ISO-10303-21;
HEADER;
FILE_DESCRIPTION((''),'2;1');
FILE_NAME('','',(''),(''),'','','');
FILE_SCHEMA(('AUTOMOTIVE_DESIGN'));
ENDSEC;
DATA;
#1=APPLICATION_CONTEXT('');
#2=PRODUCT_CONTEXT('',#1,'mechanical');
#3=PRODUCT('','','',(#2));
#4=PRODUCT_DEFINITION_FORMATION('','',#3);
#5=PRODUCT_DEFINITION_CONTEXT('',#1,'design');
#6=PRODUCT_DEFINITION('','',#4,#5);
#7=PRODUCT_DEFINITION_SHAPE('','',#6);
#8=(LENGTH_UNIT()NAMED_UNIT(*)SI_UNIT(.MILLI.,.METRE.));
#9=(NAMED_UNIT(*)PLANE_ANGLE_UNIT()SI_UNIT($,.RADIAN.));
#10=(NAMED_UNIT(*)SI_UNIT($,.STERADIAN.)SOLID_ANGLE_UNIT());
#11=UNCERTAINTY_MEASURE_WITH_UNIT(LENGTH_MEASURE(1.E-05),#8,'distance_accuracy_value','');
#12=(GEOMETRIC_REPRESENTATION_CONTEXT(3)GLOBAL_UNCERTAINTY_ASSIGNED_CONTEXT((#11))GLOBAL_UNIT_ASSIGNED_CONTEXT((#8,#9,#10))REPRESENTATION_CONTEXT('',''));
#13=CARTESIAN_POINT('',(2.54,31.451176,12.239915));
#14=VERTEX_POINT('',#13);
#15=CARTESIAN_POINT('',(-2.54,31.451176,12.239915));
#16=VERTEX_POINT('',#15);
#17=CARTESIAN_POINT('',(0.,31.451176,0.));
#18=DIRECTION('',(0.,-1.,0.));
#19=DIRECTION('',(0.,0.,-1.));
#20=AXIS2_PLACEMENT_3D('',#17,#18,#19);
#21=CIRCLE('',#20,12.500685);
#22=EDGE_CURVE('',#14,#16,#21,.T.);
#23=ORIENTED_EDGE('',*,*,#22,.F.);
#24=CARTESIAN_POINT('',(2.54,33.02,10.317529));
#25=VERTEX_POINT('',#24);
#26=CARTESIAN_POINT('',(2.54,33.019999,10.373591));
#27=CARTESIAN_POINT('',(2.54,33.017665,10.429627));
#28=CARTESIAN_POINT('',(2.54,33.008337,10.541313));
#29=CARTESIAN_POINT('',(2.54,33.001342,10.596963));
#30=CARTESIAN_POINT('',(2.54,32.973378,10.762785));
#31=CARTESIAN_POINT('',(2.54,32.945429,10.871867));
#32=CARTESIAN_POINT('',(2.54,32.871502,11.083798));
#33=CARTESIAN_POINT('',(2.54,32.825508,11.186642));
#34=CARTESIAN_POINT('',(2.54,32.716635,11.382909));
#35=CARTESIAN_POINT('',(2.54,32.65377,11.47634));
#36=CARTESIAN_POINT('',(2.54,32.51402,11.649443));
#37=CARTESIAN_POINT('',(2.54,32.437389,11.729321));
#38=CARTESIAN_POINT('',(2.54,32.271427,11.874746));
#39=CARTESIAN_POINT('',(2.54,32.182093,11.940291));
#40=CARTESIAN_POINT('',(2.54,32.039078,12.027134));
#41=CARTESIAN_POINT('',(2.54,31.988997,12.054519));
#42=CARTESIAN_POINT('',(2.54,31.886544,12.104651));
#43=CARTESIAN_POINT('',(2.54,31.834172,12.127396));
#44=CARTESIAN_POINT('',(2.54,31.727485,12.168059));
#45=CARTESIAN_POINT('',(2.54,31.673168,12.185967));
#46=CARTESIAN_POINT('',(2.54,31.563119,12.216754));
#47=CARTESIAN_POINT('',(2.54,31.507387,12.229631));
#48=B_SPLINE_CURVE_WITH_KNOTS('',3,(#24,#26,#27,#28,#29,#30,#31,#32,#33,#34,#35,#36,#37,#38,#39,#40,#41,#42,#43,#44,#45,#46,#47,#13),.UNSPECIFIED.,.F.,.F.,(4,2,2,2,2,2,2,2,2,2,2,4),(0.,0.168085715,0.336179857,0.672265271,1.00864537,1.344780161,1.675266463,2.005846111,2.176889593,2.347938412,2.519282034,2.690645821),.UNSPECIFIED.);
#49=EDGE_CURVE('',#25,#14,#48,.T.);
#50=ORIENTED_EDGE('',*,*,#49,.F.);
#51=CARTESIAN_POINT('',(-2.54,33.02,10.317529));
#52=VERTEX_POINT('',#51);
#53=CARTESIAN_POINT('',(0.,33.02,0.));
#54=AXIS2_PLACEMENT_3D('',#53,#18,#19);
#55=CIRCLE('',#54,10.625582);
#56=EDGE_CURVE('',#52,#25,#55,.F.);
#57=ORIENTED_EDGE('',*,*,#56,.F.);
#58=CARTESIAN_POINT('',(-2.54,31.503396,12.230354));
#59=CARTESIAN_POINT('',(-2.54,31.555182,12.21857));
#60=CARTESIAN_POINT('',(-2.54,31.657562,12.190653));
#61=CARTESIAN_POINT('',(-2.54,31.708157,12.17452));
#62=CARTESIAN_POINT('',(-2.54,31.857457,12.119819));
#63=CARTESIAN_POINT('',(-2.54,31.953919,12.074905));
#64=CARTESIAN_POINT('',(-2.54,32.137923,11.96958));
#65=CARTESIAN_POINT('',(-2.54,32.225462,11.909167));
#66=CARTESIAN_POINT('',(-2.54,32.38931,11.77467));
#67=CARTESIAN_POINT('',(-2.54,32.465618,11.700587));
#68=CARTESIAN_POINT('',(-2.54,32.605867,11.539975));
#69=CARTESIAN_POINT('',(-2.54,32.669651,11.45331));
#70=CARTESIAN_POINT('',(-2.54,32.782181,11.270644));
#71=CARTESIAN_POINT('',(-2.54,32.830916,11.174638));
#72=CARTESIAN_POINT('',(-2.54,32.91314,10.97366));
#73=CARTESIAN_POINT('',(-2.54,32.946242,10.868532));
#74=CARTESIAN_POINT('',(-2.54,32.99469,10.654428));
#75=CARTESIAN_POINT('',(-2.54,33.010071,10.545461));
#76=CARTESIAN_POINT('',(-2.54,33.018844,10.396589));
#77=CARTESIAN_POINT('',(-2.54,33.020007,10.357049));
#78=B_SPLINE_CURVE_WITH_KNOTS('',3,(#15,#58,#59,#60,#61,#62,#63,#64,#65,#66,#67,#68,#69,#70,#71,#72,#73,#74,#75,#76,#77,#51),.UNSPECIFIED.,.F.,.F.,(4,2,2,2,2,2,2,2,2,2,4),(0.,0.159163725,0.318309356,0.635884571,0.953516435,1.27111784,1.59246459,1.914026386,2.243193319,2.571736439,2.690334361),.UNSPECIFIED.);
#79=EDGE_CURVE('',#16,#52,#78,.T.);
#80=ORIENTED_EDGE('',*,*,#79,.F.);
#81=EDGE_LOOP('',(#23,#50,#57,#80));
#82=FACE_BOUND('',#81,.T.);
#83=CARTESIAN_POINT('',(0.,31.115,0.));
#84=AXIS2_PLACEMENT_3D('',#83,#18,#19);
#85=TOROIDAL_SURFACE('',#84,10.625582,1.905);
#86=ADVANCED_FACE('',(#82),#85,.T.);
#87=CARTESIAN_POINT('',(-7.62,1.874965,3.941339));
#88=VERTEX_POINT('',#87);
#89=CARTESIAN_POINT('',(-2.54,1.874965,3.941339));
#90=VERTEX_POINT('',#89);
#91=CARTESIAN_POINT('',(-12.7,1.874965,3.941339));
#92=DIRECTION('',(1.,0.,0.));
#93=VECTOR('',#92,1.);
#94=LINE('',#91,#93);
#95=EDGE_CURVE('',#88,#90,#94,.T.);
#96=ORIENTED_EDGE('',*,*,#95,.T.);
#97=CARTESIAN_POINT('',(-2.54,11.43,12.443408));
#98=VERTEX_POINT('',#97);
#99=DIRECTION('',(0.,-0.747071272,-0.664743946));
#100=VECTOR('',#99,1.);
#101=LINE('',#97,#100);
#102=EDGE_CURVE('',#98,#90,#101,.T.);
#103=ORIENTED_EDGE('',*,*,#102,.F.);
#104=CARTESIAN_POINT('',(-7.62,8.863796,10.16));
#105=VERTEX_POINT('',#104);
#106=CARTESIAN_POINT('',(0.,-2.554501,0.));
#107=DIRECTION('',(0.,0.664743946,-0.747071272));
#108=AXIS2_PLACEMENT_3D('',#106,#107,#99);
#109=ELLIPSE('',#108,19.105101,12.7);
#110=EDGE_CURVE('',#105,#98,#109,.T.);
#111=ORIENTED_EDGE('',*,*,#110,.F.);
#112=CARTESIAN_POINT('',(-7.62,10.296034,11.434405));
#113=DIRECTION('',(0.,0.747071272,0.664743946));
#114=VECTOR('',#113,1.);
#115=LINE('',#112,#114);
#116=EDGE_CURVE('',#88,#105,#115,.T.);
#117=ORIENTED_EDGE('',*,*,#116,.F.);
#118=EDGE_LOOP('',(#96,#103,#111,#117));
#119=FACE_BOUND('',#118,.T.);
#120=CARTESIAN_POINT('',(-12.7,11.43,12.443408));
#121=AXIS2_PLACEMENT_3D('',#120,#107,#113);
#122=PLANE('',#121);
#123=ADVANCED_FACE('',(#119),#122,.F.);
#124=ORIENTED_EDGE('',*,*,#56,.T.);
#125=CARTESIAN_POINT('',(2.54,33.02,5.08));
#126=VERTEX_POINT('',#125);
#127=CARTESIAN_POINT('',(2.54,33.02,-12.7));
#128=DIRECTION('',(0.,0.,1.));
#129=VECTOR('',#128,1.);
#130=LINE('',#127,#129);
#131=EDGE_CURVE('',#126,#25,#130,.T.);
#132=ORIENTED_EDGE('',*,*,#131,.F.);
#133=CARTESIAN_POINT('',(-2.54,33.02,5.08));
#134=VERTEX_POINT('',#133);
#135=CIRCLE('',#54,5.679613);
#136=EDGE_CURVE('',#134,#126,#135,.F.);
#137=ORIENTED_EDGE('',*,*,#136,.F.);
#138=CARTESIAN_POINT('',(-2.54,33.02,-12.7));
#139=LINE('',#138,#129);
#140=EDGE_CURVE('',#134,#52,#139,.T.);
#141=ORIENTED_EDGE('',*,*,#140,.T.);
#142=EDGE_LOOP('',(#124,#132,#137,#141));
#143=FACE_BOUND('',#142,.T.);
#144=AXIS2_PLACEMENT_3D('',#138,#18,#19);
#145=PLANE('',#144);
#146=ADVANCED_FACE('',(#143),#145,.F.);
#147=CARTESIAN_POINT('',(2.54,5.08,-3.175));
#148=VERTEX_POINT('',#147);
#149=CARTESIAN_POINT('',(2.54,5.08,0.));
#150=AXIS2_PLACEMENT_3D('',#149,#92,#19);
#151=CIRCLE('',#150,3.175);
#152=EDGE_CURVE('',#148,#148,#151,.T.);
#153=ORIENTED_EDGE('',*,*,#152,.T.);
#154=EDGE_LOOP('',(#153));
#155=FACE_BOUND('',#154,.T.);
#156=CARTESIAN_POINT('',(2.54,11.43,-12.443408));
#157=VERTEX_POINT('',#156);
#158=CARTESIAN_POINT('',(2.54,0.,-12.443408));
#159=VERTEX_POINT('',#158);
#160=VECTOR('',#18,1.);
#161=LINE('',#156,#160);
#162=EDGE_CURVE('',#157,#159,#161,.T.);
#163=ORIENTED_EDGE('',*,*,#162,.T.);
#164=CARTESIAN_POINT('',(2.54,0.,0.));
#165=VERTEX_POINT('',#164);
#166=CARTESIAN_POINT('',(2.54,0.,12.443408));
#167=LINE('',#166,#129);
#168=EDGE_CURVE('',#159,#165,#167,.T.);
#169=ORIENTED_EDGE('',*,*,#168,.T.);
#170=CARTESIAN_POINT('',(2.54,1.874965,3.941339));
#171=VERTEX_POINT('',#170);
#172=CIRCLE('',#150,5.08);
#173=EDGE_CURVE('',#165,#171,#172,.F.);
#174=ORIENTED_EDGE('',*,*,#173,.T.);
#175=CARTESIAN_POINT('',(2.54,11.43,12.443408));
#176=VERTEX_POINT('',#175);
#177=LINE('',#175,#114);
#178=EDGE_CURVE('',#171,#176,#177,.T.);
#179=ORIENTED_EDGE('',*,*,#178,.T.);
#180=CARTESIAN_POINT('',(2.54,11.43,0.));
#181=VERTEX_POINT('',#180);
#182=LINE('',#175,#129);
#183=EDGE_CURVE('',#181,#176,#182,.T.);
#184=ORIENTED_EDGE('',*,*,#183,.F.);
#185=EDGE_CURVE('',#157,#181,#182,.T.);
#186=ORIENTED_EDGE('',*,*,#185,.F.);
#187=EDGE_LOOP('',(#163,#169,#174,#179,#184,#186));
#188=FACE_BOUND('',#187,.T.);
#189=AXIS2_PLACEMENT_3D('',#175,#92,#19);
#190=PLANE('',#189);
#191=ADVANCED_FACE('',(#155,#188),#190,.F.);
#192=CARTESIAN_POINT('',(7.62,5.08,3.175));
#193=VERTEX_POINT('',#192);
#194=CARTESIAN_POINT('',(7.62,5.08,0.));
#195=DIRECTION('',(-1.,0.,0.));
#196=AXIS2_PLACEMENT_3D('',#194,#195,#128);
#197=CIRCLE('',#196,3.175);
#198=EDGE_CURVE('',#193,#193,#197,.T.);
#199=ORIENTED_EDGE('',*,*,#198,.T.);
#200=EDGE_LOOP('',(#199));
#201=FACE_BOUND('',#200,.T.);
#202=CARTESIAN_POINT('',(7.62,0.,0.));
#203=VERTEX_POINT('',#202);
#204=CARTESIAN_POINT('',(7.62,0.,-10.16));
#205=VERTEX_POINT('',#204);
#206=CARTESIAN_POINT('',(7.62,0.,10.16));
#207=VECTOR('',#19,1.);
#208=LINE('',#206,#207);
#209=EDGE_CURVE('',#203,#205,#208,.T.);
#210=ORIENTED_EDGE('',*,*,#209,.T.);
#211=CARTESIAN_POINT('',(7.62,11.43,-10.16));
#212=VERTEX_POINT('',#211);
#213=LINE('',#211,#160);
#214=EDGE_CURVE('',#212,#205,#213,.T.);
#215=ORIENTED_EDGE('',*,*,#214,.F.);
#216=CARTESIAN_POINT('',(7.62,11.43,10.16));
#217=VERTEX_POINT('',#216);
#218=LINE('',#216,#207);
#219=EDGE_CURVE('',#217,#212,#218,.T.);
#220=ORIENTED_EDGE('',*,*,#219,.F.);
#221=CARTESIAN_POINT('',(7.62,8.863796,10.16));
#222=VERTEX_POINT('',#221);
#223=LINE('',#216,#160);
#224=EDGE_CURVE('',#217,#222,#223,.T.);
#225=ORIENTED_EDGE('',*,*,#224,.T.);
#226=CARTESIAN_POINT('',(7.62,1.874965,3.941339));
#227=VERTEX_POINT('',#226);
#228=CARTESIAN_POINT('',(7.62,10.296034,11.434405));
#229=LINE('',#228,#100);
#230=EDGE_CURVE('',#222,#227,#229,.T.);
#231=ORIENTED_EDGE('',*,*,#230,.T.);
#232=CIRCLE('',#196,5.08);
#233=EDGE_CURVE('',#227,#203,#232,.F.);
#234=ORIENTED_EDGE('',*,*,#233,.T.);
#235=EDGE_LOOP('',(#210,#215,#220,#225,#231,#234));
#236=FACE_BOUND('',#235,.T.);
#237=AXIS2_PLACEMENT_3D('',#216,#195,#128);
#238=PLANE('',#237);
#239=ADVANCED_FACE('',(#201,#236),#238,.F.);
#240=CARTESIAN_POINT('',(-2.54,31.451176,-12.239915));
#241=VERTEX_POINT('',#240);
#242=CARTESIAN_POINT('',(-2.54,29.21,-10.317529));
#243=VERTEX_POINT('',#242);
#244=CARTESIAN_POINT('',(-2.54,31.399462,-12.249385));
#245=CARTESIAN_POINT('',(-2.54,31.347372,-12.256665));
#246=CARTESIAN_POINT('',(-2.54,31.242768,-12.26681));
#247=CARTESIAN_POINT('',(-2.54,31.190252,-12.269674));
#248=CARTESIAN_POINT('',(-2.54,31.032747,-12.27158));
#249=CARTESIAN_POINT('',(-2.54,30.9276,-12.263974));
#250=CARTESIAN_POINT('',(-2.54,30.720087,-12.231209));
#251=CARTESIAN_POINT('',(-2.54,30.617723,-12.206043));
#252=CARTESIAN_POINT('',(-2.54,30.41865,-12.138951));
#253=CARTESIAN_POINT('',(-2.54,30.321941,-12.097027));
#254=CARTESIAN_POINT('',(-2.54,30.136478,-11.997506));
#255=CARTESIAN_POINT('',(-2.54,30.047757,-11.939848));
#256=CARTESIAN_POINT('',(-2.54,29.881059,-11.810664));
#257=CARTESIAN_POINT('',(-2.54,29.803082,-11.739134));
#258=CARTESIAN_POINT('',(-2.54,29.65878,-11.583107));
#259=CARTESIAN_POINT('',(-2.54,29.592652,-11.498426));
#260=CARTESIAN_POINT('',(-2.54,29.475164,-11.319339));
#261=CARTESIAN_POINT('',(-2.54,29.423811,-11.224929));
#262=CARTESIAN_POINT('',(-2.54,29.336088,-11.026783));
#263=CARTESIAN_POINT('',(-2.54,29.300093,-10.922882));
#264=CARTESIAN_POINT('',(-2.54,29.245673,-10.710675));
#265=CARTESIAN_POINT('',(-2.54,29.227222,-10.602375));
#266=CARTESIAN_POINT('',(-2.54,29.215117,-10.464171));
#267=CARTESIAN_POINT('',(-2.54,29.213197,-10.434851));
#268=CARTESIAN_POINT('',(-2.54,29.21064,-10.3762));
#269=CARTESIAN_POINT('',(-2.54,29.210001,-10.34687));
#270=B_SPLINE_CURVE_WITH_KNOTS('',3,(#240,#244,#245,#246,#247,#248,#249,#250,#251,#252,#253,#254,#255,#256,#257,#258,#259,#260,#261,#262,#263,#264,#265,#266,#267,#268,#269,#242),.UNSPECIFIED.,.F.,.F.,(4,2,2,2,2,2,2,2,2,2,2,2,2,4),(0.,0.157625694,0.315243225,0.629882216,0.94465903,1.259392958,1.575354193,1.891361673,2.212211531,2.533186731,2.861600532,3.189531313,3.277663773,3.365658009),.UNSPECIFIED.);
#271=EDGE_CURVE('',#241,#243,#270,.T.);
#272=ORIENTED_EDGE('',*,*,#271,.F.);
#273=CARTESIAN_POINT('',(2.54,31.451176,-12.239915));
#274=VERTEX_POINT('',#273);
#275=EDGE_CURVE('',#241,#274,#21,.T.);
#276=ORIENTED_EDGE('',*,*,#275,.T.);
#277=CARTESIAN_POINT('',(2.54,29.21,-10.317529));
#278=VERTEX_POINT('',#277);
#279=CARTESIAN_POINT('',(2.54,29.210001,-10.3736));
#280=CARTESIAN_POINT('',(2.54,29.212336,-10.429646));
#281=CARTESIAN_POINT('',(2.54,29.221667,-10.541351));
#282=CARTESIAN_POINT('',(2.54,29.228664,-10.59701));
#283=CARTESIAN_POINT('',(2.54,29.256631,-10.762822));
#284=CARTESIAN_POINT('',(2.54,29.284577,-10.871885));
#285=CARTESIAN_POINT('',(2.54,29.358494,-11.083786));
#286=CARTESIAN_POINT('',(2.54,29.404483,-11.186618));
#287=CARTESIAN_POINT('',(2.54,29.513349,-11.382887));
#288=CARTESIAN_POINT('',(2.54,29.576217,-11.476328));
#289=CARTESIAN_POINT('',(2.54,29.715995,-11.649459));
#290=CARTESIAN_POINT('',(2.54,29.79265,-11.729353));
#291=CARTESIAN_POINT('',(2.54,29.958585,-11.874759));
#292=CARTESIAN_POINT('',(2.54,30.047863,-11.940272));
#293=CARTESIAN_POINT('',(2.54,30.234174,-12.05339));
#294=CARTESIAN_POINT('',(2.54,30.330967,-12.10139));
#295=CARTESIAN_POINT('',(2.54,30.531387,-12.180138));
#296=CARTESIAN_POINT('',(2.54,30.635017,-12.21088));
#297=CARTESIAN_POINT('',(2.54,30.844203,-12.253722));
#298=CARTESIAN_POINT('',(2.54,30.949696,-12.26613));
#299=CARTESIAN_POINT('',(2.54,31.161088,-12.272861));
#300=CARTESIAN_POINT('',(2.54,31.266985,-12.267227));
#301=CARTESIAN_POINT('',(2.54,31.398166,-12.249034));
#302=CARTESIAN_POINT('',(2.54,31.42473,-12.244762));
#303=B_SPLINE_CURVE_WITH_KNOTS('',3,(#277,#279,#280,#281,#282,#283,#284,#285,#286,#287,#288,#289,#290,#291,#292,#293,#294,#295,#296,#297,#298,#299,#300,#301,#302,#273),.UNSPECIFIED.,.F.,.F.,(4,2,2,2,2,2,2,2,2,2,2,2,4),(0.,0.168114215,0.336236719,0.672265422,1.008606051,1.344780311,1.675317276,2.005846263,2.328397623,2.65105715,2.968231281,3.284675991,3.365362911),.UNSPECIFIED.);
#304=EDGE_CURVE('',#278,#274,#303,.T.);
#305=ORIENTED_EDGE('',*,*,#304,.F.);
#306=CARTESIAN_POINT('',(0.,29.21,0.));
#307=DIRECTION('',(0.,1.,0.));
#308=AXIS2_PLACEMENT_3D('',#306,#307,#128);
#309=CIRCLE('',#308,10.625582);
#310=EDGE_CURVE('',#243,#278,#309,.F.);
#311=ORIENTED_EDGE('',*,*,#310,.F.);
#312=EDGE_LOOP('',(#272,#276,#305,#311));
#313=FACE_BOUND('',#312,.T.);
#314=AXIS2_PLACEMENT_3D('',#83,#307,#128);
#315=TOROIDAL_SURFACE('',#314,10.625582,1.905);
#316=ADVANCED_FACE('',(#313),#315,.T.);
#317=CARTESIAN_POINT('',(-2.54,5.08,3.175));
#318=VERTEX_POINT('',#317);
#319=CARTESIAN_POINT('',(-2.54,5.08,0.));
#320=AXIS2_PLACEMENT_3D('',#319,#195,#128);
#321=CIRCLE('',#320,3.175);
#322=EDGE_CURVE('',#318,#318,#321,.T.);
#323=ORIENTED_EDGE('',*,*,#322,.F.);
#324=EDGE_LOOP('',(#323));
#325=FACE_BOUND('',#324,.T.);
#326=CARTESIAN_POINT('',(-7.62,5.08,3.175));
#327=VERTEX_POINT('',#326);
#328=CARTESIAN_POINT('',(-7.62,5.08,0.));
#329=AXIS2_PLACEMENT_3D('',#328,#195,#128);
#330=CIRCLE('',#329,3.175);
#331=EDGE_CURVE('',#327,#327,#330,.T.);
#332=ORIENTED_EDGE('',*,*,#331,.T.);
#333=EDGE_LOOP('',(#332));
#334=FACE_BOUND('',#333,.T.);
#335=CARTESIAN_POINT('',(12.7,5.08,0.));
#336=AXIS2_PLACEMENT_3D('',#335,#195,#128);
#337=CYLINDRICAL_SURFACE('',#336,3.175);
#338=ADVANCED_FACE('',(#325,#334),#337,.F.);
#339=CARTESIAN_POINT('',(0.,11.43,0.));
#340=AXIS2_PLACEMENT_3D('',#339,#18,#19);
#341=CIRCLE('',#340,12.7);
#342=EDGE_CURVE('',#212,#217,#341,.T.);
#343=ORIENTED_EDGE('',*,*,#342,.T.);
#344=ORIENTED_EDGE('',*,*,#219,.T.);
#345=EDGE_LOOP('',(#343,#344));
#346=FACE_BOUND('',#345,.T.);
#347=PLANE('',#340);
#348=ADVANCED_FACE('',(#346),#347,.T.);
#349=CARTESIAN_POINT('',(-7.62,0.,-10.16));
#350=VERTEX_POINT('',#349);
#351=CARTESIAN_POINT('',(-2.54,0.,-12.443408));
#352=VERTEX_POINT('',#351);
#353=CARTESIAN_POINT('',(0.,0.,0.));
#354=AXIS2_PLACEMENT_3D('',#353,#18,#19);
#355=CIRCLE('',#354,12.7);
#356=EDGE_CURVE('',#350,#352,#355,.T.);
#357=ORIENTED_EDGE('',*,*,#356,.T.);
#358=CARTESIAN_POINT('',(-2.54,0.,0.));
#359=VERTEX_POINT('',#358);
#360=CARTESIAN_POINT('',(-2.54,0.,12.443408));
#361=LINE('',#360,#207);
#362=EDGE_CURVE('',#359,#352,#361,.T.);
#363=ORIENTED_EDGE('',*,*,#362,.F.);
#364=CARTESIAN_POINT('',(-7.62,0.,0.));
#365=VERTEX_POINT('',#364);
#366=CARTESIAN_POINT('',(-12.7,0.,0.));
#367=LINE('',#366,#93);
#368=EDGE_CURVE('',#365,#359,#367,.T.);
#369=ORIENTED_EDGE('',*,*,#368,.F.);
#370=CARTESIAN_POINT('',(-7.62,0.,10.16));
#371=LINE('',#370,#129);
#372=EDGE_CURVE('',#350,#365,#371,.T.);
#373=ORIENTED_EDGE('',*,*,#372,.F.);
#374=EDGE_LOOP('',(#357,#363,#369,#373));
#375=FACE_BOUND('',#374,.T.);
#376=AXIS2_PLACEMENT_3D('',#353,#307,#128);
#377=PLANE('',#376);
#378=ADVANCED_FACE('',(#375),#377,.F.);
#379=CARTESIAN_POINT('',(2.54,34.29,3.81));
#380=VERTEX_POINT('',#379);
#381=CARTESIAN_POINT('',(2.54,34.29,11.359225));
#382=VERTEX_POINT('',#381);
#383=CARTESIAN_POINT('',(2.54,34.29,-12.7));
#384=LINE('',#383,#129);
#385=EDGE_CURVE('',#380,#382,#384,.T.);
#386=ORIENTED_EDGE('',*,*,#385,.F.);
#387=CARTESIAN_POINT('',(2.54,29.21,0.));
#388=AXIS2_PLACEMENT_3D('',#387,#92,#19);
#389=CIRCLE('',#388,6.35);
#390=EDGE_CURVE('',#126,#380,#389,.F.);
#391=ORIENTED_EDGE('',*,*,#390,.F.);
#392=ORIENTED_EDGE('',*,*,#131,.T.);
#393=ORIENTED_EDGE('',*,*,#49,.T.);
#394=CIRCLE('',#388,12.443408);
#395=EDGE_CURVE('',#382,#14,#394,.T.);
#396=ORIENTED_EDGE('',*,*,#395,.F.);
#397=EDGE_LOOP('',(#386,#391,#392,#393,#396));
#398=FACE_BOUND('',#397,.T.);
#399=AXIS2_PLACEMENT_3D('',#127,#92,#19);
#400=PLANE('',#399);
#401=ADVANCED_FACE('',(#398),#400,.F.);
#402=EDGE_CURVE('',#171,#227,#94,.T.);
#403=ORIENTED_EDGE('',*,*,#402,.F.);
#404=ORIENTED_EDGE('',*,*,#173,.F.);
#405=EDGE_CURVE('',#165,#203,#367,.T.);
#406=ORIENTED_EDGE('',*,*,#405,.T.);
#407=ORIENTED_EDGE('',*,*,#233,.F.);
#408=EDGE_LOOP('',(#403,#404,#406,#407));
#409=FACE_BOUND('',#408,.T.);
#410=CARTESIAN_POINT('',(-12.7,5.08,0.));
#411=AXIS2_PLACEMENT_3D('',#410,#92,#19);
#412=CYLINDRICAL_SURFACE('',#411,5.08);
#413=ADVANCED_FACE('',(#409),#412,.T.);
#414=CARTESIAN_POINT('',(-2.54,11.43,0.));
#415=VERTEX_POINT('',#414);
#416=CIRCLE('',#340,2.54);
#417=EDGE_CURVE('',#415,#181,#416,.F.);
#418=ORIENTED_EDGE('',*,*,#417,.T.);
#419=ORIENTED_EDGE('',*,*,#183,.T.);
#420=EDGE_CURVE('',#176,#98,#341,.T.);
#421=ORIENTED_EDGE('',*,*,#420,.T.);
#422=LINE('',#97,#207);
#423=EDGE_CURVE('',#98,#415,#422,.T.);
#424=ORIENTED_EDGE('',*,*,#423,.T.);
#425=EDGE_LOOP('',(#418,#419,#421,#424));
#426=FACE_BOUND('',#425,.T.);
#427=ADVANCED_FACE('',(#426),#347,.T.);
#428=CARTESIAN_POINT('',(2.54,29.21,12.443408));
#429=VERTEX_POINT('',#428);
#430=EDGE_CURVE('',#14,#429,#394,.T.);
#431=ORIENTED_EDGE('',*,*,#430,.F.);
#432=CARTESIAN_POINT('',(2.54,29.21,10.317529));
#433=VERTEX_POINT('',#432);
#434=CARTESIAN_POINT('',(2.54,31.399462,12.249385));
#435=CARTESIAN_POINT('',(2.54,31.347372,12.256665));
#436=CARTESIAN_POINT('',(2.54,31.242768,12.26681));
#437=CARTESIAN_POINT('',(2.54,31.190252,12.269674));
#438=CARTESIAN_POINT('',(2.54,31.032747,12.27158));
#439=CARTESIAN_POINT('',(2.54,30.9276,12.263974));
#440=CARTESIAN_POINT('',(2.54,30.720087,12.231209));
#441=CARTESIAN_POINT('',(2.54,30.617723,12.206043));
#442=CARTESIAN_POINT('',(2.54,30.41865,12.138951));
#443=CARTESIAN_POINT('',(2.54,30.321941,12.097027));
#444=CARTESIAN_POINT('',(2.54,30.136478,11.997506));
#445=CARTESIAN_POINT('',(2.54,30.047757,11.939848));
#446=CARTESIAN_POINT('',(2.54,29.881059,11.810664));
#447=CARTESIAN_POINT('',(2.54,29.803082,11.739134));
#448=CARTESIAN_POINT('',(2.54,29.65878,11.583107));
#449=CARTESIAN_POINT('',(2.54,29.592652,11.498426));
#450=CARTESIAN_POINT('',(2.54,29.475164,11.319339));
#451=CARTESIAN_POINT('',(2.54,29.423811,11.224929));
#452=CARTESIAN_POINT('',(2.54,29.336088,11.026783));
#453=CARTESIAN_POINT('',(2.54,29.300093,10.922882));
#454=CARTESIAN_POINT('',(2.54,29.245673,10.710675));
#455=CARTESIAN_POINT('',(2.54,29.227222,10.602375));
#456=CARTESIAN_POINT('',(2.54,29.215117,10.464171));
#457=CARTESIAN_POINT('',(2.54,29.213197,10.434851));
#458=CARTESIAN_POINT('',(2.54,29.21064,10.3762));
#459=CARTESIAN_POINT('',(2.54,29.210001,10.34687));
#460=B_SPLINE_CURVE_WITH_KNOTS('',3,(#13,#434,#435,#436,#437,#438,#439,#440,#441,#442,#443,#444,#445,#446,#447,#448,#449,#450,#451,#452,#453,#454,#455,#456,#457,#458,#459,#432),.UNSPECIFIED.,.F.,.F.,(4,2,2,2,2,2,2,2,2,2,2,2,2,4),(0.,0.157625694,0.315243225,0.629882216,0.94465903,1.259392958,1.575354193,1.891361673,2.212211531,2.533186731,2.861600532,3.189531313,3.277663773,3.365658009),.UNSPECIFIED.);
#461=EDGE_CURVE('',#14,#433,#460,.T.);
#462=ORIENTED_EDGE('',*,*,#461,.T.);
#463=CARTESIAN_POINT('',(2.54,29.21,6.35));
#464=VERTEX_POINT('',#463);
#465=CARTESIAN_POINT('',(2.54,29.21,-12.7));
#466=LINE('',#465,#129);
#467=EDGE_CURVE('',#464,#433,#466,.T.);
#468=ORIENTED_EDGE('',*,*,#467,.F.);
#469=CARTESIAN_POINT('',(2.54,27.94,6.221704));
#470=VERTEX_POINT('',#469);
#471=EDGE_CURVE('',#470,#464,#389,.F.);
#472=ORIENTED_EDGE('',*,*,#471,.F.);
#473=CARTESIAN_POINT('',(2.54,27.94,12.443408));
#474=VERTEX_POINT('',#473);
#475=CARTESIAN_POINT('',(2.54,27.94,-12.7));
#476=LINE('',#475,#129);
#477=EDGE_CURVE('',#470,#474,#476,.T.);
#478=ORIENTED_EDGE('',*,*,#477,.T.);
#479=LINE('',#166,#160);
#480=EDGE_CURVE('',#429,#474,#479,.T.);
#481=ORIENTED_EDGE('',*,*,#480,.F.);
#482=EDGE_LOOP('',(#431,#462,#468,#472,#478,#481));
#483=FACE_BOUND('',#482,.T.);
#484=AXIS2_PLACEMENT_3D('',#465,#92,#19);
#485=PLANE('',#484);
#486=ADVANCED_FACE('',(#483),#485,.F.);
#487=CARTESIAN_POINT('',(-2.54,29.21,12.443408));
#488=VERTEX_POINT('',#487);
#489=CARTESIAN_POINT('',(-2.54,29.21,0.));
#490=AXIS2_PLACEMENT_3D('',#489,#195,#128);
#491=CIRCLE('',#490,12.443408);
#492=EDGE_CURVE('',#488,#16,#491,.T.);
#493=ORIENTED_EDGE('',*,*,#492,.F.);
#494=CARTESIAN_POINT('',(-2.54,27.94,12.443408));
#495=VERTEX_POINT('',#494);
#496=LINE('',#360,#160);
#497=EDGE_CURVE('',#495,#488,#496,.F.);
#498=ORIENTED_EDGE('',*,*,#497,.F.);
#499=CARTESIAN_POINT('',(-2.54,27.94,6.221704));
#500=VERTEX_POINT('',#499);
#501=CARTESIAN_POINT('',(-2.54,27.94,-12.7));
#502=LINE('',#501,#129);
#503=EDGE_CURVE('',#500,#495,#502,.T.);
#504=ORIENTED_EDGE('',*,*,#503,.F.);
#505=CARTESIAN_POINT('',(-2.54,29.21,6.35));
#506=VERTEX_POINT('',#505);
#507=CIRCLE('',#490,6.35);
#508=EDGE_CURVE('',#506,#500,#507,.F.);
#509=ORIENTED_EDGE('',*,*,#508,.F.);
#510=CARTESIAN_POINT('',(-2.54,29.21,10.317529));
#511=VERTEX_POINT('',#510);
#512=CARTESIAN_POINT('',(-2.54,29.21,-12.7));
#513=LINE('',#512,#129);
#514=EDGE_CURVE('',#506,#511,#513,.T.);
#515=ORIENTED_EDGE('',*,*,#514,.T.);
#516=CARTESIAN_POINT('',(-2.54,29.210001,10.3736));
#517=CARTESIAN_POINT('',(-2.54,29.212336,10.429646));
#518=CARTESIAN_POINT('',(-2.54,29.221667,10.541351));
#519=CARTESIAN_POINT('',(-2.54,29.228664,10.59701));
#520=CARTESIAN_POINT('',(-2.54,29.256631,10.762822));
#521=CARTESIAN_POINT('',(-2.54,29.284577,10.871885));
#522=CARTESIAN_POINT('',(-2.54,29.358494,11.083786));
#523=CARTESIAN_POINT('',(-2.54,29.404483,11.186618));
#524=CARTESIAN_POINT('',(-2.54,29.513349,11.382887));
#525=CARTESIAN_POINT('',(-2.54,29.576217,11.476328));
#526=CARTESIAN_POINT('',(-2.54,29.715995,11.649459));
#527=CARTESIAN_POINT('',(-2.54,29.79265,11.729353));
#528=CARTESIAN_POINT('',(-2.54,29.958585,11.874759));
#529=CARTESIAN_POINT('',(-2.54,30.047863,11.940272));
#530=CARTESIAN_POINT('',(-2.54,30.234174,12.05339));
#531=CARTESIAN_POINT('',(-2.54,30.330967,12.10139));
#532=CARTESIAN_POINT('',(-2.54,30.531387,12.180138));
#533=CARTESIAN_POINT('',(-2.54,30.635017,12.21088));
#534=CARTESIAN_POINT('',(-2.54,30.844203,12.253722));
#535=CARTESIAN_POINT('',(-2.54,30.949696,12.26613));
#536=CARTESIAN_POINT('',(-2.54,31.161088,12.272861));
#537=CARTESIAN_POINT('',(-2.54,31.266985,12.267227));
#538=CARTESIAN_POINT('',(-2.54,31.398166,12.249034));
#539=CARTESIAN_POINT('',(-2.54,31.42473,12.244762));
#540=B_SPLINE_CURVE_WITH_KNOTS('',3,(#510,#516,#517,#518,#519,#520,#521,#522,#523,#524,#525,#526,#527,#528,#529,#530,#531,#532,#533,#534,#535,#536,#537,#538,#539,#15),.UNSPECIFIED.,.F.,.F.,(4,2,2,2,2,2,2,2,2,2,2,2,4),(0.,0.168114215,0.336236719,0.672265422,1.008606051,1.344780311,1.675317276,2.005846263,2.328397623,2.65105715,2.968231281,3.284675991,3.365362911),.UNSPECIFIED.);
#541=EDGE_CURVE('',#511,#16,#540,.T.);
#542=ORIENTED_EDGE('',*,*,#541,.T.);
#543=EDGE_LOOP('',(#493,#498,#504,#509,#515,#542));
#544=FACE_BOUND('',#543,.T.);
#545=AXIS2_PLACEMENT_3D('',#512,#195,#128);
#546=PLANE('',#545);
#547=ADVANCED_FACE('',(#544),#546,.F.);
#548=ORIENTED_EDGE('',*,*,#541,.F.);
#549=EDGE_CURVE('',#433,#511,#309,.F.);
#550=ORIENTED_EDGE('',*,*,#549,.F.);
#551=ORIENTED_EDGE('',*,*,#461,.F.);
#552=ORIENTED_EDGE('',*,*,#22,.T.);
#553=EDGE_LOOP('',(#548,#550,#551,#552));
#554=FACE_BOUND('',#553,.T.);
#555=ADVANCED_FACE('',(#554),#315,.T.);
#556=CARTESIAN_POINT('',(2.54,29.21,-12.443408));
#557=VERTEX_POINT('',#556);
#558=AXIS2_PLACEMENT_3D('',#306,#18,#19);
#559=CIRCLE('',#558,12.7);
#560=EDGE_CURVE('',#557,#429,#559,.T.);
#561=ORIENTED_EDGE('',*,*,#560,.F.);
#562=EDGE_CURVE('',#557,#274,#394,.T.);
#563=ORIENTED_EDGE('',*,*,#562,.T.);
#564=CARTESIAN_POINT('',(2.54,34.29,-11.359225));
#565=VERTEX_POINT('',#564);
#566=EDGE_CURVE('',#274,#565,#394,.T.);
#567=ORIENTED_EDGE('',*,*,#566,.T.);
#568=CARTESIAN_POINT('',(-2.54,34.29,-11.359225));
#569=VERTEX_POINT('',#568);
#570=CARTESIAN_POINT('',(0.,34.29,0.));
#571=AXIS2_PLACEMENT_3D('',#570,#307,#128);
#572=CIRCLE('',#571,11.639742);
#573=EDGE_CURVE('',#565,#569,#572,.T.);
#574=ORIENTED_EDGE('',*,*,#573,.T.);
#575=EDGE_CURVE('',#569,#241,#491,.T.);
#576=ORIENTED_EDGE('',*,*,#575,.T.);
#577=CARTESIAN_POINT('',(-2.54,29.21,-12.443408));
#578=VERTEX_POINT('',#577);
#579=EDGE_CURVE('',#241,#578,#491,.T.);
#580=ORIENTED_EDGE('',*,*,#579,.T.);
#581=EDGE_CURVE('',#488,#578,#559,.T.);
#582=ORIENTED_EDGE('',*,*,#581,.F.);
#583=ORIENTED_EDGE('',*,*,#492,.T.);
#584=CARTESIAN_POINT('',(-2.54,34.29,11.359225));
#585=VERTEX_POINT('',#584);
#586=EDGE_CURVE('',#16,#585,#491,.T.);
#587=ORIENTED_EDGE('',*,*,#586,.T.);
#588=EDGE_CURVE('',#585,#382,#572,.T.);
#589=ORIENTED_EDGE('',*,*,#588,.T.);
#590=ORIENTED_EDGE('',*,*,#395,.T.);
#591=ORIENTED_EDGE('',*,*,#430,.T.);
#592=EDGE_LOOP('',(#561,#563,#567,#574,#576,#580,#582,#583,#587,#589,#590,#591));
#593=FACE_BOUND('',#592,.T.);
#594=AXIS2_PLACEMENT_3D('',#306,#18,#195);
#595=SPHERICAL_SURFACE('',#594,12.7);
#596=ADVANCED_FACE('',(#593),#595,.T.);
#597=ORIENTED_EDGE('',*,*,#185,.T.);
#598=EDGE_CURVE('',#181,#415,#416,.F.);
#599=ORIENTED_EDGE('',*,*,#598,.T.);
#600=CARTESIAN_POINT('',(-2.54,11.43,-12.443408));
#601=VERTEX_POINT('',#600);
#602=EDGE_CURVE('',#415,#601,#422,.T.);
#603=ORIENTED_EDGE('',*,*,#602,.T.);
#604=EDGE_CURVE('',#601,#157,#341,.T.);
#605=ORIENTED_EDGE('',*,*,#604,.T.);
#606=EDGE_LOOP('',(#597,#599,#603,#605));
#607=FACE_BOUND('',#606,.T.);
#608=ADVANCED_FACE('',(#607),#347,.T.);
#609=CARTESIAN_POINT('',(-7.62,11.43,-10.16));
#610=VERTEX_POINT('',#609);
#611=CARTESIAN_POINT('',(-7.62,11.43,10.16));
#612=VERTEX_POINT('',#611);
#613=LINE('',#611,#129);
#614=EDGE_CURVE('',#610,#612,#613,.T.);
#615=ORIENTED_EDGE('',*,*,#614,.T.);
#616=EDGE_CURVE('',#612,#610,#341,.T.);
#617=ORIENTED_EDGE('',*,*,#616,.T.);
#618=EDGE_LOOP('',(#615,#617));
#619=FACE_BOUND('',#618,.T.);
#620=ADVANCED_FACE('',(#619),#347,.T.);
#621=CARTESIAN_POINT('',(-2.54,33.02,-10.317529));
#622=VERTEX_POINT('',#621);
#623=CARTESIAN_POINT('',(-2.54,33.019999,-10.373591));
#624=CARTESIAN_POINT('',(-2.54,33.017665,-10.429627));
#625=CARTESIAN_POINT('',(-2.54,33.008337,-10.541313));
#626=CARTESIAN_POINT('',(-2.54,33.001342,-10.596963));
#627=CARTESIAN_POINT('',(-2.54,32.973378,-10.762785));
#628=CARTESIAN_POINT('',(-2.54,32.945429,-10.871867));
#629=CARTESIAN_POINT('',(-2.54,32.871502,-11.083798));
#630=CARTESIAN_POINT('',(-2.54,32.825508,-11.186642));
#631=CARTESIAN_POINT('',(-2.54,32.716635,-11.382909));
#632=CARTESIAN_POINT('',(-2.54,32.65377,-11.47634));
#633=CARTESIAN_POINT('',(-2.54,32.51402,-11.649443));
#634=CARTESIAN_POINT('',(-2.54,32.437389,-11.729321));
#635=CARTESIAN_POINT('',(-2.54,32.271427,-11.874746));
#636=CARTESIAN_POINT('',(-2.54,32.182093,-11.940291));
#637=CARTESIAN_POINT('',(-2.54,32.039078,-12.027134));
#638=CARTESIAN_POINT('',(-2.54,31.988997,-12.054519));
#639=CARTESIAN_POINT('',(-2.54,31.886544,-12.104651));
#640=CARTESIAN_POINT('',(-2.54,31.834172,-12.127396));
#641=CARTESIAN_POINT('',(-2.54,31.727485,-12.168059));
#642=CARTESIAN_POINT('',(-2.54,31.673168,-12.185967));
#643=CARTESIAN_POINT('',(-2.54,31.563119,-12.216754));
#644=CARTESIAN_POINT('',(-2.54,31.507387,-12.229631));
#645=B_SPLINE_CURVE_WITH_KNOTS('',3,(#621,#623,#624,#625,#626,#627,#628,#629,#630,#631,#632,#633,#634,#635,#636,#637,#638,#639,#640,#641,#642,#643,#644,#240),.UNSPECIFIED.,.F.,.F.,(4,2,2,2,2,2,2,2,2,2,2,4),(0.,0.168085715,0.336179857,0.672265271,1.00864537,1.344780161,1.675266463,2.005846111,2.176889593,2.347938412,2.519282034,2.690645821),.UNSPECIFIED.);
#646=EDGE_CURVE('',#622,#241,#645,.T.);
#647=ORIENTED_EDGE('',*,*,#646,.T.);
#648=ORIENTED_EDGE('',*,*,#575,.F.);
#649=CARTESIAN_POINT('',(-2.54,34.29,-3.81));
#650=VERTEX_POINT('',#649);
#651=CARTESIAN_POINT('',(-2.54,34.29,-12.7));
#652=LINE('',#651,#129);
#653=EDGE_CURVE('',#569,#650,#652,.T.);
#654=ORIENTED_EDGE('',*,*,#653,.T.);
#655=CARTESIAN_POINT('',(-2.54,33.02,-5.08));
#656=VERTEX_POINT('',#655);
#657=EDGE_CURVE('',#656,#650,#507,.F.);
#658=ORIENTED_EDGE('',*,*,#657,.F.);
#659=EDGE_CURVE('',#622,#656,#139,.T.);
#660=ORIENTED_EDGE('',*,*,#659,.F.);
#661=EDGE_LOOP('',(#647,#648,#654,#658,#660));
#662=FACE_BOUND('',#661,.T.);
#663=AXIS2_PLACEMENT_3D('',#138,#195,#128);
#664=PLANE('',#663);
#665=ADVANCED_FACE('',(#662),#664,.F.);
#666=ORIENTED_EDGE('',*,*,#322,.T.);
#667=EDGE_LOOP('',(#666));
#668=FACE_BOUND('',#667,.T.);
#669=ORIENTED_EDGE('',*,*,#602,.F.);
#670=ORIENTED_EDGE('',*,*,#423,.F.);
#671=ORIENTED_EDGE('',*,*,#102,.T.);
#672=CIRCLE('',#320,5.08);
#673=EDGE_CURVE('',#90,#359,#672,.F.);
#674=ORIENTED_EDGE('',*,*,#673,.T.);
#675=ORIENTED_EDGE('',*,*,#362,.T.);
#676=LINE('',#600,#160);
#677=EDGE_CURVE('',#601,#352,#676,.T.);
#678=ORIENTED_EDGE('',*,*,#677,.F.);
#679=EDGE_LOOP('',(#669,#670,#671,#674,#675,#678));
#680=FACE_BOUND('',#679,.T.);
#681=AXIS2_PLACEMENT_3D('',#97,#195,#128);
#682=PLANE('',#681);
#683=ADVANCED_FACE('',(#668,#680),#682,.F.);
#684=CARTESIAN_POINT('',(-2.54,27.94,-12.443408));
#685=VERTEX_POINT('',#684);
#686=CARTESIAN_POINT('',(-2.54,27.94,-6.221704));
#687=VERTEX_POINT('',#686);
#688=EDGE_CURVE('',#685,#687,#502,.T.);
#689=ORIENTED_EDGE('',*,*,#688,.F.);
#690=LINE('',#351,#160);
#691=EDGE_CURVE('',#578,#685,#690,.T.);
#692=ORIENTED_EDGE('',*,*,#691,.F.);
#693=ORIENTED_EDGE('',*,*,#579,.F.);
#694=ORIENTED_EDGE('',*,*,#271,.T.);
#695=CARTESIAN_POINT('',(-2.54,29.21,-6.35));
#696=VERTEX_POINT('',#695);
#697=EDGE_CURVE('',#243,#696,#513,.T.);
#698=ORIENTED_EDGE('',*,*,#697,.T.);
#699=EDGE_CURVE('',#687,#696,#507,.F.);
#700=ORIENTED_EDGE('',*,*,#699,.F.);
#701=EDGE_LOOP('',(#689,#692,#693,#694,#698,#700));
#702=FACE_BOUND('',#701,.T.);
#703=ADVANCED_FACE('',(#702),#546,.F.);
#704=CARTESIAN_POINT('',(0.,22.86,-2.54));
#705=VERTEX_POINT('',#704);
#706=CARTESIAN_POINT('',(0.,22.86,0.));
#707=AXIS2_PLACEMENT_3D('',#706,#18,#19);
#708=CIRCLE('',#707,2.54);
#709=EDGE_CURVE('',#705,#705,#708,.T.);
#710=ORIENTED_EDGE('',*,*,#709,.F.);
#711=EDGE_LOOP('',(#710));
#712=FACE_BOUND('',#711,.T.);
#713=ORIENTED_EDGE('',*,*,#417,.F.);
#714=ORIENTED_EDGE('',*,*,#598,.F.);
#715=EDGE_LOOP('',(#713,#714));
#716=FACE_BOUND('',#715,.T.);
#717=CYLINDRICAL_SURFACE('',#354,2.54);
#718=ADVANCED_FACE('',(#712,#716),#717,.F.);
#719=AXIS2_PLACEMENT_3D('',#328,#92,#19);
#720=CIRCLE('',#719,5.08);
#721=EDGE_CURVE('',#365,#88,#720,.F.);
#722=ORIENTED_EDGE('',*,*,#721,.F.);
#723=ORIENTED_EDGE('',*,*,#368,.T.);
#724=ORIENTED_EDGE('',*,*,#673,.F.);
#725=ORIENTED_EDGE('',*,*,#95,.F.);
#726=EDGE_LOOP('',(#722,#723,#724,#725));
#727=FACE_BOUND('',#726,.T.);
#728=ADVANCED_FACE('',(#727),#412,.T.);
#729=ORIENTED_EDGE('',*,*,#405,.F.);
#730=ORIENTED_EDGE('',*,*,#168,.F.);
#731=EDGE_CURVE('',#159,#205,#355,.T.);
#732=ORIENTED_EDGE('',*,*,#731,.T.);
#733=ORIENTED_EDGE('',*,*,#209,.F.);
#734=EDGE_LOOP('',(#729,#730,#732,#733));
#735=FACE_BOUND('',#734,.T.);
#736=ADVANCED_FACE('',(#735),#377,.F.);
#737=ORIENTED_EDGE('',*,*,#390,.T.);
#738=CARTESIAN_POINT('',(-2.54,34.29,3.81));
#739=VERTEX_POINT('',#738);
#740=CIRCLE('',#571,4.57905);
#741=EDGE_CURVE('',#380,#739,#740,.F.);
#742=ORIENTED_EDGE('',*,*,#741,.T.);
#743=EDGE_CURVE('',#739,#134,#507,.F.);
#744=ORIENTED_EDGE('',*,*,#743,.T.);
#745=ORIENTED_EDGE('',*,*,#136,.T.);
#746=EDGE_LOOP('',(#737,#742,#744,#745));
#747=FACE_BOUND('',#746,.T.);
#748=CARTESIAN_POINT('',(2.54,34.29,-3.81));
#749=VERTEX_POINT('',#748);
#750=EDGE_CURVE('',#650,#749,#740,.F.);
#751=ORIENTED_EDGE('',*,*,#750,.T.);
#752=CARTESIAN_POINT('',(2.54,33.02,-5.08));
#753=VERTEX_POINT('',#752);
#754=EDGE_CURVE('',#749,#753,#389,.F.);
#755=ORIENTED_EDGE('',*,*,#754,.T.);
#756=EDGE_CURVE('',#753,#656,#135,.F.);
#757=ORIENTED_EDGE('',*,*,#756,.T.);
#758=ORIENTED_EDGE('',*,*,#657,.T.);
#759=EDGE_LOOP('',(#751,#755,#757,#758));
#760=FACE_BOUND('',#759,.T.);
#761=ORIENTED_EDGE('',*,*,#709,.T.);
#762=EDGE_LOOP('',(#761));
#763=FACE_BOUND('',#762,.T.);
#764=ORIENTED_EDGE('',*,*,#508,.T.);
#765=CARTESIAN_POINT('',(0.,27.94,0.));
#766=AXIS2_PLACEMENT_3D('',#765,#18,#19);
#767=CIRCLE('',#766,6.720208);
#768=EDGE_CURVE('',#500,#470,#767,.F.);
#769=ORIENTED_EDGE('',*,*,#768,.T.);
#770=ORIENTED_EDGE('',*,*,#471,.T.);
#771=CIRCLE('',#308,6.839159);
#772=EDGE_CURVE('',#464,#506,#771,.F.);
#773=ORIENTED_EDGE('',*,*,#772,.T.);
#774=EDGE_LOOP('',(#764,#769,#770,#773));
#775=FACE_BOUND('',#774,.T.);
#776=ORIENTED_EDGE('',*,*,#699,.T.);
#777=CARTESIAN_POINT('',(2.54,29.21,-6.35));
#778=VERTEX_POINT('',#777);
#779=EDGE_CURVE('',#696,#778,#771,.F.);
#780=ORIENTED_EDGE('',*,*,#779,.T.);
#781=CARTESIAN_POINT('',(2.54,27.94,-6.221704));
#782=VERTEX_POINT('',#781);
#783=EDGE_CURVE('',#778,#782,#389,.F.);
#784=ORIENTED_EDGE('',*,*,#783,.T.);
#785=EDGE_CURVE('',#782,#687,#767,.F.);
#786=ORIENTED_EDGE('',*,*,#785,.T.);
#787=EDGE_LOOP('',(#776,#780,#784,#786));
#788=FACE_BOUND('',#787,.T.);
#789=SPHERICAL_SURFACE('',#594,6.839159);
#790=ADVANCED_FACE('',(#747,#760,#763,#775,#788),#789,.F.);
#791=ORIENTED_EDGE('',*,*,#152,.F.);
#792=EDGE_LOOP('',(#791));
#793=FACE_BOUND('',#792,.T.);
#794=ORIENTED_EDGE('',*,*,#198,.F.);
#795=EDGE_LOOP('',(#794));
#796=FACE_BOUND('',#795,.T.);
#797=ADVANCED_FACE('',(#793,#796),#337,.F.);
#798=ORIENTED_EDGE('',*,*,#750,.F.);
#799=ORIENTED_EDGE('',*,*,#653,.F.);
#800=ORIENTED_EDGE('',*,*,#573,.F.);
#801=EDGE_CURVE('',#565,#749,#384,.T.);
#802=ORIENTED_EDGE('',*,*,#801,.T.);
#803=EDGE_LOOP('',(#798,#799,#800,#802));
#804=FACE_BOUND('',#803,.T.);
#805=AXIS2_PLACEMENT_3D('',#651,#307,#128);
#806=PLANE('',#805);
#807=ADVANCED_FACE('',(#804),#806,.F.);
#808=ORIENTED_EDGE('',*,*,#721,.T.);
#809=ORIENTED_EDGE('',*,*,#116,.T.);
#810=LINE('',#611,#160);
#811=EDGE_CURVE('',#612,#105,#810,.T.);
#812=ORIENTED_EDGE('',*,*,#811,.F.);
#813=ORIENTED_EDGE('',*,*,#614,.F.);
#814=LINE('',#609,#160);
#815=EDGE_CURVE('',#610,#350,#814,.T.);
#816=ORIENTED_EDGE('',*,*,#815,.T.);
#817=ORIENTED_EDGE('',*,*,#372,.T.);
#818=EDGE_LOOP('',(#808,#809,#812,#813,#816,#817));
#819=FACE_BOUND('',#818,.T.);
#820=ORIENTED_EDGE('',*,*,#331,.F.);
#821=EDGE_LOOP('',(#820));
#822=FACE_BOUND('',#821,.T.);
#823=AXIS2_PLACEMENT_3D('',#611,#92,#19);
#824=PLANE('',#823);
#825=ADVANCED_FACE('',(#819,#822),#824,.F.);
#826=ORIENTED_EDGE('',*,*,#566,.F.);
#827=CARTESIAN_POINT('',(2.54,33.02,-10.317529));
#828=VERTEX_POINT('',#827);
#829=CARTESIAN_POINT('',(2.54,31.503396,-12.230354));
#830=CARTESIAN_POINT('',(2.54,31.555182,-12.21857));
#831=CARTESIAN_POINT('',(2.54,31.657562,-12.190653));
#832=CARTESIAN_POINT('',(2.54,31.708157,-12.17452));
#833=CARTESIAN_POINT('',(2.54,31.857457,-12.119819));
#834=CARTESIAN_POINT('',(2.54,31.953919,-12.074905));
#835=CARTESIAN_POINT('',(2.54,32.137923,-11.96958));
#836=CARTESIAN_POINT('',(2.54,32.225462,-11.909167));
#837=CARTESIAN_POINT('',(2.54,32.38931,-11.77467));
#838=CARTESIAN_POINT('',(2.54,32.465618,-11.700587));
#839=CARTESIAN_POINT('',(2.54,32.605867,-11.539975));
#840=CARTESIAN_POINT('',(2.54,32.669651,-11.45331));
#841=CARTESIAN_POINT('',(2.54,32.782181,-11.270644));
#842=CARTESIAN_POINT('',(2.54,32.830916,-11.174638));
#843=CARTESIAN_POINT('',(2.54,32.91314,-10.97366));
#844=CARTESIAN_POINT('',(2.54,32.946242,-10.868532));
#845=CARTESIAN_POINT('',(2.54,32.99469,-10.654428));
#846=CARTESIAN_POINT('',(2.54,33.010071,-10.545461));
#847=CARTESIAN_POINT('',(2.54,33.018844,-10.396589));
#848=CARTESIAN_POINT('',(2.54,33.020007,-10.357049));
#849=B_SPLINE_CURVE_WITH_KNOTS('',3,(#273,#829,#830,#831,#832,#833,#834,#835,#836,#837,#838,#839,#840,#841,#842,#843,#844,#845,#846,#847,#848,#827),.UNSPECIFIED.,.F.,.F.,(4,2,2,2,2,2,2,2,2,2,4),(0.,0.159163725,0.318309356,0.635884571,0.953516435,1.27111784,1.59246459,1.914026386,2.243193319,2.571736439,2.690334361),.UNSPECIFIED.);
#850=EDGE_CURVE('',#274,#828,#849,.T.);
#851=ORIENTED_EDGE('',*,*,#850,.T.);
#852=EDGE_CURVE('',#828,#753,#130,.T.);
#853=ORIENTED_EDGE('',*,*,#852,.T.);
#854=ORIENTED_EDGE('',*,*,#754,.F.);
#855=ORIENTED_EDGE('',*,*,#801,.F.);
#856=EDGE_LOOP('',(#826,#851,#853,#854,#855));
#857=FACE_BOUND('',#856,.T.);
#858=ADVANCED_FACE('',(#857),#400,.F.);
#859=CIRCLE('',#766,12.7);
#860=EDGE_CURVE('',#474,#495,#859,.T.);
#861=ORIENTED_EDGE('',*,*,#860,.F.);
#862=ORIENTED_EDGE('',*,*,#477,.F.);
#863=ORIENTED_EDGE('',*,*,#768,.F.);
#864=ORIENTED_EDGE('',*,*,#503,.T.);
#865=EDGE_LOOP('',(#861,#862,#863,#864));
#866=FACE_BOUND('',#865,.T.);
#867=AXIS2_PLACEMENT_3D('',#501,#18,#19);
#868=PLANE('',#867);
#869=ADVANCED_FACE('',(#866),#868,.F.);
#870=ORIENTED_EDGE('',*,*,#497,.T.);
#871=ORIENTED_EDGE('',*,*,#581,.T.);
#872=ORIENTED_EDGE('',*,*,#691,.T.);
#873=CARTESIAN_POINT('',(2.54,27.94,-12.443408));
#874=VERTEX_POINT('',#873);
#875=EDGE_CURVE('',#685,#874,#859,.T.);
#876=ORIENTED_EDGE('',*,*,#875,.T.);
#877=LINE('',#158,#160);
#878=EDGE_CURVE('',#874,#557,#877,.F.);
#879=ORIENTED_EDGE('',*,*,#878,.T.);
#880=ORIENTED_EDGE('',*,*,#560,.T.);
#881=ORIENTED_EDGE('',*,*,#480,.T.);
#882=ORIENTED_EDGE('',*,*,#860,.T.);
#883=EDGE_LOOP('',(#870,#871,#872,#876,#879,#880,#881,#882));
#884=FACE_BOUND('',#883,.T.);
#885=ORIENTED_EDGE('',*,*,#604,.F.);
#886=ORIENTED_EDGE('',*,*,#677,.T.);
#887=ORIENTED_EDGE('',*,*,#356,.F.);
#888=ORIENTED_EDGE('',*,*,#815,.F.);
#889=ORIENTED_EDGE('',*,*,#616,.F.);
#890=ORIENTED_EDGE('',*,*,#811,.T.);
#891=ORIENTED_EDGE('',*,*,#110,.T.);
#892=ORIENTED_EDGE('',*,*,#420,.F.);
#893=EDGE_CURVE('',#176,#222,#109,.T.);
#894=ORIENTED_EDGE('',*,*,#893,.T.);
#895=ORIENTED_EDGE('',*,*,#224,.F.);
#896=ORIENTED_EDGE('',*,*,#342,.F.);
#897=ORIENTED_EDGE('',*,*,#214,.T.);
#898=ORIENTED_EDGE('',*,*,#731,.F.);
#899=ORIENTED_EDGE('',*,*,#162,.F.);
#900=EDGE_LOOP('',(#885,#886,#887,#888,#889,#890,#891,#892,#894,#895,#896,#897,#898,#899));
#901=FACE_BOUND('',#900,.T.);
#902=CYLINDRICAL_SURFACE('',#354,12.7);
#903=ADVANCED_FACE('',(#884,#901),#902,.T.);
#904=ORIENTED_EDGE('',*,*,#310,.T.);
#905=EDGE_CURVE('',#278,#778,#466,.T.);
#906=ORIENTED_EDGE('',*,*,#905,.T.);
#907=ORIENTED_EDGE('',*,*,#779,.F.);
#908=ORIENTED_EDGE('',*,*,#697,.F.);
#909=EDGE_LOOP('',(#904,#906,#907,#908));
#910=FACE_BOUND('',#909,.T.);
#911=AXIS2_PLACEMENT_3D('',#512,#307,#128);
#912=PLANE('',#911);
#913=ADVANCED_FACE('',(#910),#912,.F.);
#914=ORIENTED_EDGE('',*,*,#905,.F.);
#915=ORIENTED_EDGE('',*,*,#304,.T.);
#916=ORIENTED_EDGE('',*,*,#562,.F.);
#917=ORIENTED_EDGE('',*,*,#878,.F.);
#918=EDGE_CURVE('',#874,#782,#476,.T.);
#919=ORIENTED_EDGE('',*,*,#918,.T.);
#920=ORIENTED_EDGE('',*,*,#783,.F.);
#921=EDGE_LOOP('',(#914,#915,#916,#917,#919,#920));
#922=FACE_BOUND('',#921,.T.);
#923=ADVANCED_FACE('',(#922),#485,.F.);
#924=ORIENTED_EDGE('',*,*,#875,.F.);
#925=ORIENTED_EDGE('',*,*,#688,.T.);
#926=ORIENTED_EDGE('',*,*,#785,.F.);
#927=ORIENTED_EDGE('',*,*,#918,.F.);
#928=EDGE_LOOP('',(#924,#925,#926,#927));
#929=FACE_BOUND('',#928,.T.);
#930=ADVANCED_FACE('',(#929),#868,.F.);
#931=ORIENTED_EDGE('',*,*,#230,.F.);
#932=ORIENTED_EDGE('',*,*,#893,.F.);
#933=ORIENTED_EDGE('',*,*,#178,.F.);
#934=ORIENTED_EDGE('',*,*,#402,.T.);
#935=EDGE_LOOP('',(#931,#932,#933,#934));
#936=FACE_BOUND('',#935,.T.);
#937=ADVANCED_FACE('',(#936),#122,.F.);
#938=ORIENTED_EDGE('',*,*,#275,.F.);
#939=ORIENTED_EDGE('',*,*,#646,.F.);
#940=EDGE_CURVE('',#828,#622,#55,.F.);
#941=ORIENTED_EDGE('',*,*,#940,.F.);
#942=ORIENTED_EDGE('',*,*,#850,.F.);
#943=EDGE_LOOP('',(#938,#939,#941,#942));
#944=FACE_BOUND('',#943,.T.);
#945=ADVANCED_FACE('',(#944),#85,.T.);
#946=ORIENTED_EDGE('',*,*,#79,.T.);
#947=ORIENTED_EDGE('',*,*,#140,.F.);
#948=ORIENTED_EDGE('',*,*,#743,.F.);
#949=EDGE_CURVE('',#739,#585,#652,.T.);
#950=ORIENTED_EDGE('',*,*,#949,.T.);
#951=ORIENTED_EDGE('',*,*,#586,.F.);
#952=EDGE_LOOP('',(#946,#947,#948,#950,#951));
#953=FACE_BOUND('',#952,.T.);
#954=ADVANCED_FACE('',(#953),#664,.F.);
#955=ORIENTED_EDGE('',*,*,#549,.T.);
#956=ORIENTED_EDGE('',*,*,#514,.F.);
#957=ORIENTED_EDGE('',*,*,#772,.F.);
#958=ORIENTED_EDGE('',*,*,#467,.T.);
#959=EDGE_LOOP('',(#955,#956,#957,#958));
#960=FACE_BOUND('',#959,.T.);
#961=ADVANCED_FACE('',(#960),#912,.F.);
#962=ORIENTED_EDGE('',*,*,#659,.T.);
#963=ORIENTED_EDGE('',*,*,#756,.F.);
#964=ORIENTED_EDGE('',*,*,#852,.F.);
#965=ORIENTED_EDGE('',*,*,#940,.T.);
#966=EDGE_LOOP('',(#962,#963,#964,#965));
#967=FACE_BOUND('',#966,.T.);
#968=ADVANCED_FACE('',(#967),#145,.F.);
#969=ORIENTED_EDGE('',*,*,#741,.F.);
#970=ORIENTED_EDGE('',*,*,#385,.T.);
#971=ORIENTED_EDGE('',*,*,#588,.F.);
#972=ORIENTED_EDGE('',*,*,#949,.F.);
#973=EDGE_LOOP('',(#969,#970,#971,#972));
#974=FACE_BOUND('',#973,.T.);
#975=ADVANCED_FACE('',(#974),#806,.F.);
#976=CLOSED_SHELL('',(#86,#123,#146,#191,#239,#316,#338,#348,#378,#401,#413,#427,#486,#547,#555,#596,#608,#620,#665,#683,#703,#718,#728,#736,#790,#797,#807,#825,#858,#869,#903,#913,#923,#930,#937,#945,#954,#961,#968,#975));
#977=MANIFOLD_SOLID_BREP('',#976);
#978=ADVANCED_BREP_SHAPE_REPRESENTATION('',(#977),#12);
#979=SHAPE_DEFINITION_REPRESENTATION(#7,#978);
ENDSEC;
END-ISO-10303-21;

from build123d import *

# Parameters (mm, degrees)
CUT_EXTRUDE1_DEPTH      = 11.43
SKETCH3_R               = 3.175
CUT_EXTRUDE2_DEPTH      = 49.276707634
CUT_EXTRUDE3_DEPTH      = 47.368046109
CUT_EXTRUDE3_DEPTH_BACK = 47.368046109
CUT_EXTRUDE5_DEPTH      = 46.5963606
CUT_EXTRUDE5_DEPTH_BACK = 46.5963606
SKETCH7_W               = 5.08
SKETCH7_H               = 1.27
FILLET1_R               = 1.905


with BuildPart() as part:
    # Sketch1 → Revolve1 (revolve)
    with BuildSketch(Plane.XY):
        with BuildLine():
            Line((0, 0), (0, 5.602635041))
            Line((0, 5.602635041), (-2.54, 5.602635041))
            Line((-2.54, 5.602635041), (-2.54, 22.86))
            ThreePointArc((-2.54, 22.86), (-6.715756159, 30.503336463), (0, 36.049159305))
            Line((0, 36.049159305), (0, 41.91))
            ThreePointArc((0, 41.91), (-8.980256121, 38.190256121), (-12.7, 29.21))
            Line((-12.7, 29.21), (-12.7, 0))
            Line((-12.7, 0), (0, 0))
        make_face()
    revolve(axis=Axis((0, 0, 0), (0, 1, 0)))

    # Sketch2 → Cut-Extrude1 (cut)
    with BuildSketch(Plane.XZ):
        with BuildLine():
            Line((-2.54, 12.443407893), (-2.54, -12.443407893))
            ThreePointArc((-2.54, -12.443407893), (0, -12.7), (2.54, -12.443407893))
            Line((2.54, -12.443407893), (2.54, 12.443407893))
            ThreePointArc((2.54, 12.443407893), (0, 12.7), (-2.54, 12.443407893))
        make_face()
        with BuildLine():
            Line((-7.62, 10.16), (-7.62, -10.16))
            ThreePointArc((-7.62, -10.16), (-12.7, 0), (-7.62, 10.16))
        make_face()
        with BuildLine():
            Line((7.62, 10.16), (7.62, -10.16))
            ThreePointArc((7.62, -10.16), (12.7, 0), (7.62, 10.16))
        make_face()
    extrude(amount=-CUT_EXTRUDE1_DEPTH, mode=Mode.SUBTRACT)

    # Sketch3 → Cut-Extrude2 (cut, through all)
    with BuildSketch(Plane.ZY.offset(7.62)):
        with Locations((0, 5.08)):
            Circle(SKETCH3_R)
    extrude(amount=-CUT_EXTRUDE2_DEPTH, mode=Mode.SUBTRACT)

    # Sketch4 → Cut-Extrude3 (cut, two sides: drawn at the far end of the back side and taken through both)
    with BuildSketch(Plane(origin=(-2.54, 0, 0), x_dir=(0, 0, -1), z_dir=(1, 0, 0)).offset(-CUT_EXTRUDE3_DEPTH_BACK)):
        with BuildLine():
            Line((-12.443407893, 11.43), (-3.94133892, 1.874965286))
            ThreePointArc((-3.94133892, 1.874965286), (-2.182295082, 0.492627313), (0, 0))
            Line((0, 0), (-12.443407893, 0))
            Line((-12.443407893, 0), (-12.443407893, 11.43))
        make_face()
    extrude(amount=CUT_EXTRUDE3_DEPTH + CUT_EXTRUDE3_DEPTH_BACK, mode=Mode.SUBTRACT)

    # Sketch7 → Cut-Extrude5 (cut, two sides: drawn at the far end of the back side and taken through both)
    with BuildSketch(Plane.XY.offset(-CUT_EXTRUDE5_DEPTH_BACK)):
        with Locations((0, 28.575)):
            Rectangle(SKETCH7_W, SKETCH7_H)
        with Locations((0, 33.655)):
            Rectangle(SKETCH7_W, SKETCH7_H)
    extrude(amount=CUT_EXTRUDE5_DEPTH + CUT_EXTRUDE5_DEPTH_BACK, mode=Mode.SUBTRACT)

    # Fillet1
    # the kernel refuses this fillet: 1.905 mm, written as the material it takes off along each edge
    with BuildSketch(Plane(origin=(0, 29.21, 0), x_dir=(-0.6006287696946588, 0, 0.7995280364159099), z_dir=(-0.7995280364159099, 0, -0.6006287696946588))) as fillet1_piece_1_section:
        with BuildLine():
            CenterArc((10.625582337, 1.905), FILLET1_R, 270, 100.164248622)
            Line((10.625582337, 0), (12.7, 0))
            ThreePointArc((12.7, 0), (12.650073138, 1.125010933), (12.500685102, 2.241176471))
        make_face()
    fillet1_piece_1 = revolve(axis=Axis((0, 29.21, 0), (0, 1, 0)), revolution_arc=73.829886486, mode=Mode.PRIVATE)
    fillet1_piece_1 = split(fillet1_piece_1, bisect_by=Plane(origin=(2.54, 29.726908465, 12.1243087), z_dir=(-1, 0, 0)), keep=Keep.TOP, mode=Mode.PRIVATE)
    fillet1_piece_1 = split(fillet1_piece_1, bisect_by=Plane(origin=(-2.54, 29.726908465, 12.1243087), z_dir=(1, 0, 0)), keep=Keep.TOP, mode=Mode.PRIVATE)
    add(fillet1_piece_1, mode=Mode.SUBTRACT)
    with BuildSketch(Plane(origin=(0, 33.02, 0), x_dir=(0.5180820301307637, 0, 0.8553309359865259), z_dir=(0.8553309359865259, 0, -0.5180820301307637))) as fillet1_piece_2_section:
        with BuildLine():
            CenterArc((10.625582337, 1.905), FILLET1_R, 270, 79.835751378)
            Line((10.625582337, 0), (12.115027858, 0))
            ThreePointArc((12.115027858, 0), (12.332827452, 0.778273257), (12.500685102, 1.568823529))
        make_face()
    fillet1_piece_2 = revolve(axis=Axis((0, 33.02, 0), (0, -1, 0)), revolution_arc=62.407371172, mode=Mode.PRIVATE)
    fillet1_piece_2 = split(fillet1_piece_2, bisect_by=Plane(origin=(-2.54, 32.67222625, 11.799196002), z_dir=(1, 0, 0)), keep=Keep.TOP, mode=Mode.PRIVATE)
    fillet1_piece_2 = split(fillet1_piece_2, bisect_by=Plane(origin=(2.54, 32.67222625, 11.799196002), z_dir=(-1, 0, 0)), keep=Keep.TOP, mode=Mode.PRIVATE)
    add(fillet1_piece_2, mode=Mode.SUBTRACT)
    with BuildSketch(Plane(origin=(0, 33.02, 0), x_dir=(-0.5180820301307628, 0, -0.8553309359865263), z_dir=(-0.8553309359865263, 0, 0.5180820301307628))) as fillet1_piece_3_section:
        with BuildLine():
            CenterArc((10.625582337, 1.905), FILLET1_R, 270, 79.835751378)
            Line((10.625582337, 0), (12.115027858, 0))
            ThreePointArc((12.115027858, 0), (12.332827452, 0.778273257), (12.500685102, 1.568823529))
        make_face()
    fillet1_piece_3 = revolve(axis=Axis((0, 33.02, 0), (0, -1, 0)), revolution_arc=62.407371172, mode=Mode.PRIVATE)
    fillet1_piece_3 = split(fillet1_piece_3, bisect_by=Plane(origin=(-2.54, 32.67222625, -11.799196002), z_dir=(1, 0, 0)), keep=Keep.TOP, mode=Mode.PRIVATE)
    fillet1_piece_3 = split(fillet1_piece_3, bisect_by=Plane(origin=(2.54, 32.67222625, -11.799196002), z_dir=(-1, 0, 0)), keep=Keep.TOP, mode=Mode.PRIVATE)
    add(fillet1_piece_3, mode=Mode.SUBTRACT)
    with BuildSketch(Plane(origin=(0, 29.21, 0), x_dir=(0.6006287696946002, 0, -0.7995280364159538), z_dir=(0.7995280364159538, 0, 0.6006287696946002))) as fillet1_piece_4_section:
        with BuildLine():
            CenterArc((10.625582337, 1.905), FILLET1_R, 270, 100.164248622)
            Line((10.625582337, 0), (12.7, 0))
            ThreePointArc((12.7, 0), (12.650073138, 1.125010933), (12.500685102, 2.241176471))
        make_face()
    fillet1_piece_4 = revolve(axis=Axis((0, 29.21, 0), (0, 1, 0)), revolution_arc=73.829886486, mode=Mode.PRIVATE)
    fillet1_piece_4 = split(fillet1_piece_4, bisect_by=Plane(origin=(-2.54, 29.726908465, -12.1243087), z_dir=(1, 0, 0)), keep=Keep.TOP, mode=Mode.PRIVATE)
    fillet1_piece_4 = split(fillet1_piece_4, bisect_by=Plane(origin=(2.54, 29.726908465, -12.1243087), z_dir=(-1, 0, 0)), keep=Keep.TOP, mode=Mode.PRIVATE)
    add(fillet1_piece_4, mode=Mode.SUBTRACT)


solid = part.part
